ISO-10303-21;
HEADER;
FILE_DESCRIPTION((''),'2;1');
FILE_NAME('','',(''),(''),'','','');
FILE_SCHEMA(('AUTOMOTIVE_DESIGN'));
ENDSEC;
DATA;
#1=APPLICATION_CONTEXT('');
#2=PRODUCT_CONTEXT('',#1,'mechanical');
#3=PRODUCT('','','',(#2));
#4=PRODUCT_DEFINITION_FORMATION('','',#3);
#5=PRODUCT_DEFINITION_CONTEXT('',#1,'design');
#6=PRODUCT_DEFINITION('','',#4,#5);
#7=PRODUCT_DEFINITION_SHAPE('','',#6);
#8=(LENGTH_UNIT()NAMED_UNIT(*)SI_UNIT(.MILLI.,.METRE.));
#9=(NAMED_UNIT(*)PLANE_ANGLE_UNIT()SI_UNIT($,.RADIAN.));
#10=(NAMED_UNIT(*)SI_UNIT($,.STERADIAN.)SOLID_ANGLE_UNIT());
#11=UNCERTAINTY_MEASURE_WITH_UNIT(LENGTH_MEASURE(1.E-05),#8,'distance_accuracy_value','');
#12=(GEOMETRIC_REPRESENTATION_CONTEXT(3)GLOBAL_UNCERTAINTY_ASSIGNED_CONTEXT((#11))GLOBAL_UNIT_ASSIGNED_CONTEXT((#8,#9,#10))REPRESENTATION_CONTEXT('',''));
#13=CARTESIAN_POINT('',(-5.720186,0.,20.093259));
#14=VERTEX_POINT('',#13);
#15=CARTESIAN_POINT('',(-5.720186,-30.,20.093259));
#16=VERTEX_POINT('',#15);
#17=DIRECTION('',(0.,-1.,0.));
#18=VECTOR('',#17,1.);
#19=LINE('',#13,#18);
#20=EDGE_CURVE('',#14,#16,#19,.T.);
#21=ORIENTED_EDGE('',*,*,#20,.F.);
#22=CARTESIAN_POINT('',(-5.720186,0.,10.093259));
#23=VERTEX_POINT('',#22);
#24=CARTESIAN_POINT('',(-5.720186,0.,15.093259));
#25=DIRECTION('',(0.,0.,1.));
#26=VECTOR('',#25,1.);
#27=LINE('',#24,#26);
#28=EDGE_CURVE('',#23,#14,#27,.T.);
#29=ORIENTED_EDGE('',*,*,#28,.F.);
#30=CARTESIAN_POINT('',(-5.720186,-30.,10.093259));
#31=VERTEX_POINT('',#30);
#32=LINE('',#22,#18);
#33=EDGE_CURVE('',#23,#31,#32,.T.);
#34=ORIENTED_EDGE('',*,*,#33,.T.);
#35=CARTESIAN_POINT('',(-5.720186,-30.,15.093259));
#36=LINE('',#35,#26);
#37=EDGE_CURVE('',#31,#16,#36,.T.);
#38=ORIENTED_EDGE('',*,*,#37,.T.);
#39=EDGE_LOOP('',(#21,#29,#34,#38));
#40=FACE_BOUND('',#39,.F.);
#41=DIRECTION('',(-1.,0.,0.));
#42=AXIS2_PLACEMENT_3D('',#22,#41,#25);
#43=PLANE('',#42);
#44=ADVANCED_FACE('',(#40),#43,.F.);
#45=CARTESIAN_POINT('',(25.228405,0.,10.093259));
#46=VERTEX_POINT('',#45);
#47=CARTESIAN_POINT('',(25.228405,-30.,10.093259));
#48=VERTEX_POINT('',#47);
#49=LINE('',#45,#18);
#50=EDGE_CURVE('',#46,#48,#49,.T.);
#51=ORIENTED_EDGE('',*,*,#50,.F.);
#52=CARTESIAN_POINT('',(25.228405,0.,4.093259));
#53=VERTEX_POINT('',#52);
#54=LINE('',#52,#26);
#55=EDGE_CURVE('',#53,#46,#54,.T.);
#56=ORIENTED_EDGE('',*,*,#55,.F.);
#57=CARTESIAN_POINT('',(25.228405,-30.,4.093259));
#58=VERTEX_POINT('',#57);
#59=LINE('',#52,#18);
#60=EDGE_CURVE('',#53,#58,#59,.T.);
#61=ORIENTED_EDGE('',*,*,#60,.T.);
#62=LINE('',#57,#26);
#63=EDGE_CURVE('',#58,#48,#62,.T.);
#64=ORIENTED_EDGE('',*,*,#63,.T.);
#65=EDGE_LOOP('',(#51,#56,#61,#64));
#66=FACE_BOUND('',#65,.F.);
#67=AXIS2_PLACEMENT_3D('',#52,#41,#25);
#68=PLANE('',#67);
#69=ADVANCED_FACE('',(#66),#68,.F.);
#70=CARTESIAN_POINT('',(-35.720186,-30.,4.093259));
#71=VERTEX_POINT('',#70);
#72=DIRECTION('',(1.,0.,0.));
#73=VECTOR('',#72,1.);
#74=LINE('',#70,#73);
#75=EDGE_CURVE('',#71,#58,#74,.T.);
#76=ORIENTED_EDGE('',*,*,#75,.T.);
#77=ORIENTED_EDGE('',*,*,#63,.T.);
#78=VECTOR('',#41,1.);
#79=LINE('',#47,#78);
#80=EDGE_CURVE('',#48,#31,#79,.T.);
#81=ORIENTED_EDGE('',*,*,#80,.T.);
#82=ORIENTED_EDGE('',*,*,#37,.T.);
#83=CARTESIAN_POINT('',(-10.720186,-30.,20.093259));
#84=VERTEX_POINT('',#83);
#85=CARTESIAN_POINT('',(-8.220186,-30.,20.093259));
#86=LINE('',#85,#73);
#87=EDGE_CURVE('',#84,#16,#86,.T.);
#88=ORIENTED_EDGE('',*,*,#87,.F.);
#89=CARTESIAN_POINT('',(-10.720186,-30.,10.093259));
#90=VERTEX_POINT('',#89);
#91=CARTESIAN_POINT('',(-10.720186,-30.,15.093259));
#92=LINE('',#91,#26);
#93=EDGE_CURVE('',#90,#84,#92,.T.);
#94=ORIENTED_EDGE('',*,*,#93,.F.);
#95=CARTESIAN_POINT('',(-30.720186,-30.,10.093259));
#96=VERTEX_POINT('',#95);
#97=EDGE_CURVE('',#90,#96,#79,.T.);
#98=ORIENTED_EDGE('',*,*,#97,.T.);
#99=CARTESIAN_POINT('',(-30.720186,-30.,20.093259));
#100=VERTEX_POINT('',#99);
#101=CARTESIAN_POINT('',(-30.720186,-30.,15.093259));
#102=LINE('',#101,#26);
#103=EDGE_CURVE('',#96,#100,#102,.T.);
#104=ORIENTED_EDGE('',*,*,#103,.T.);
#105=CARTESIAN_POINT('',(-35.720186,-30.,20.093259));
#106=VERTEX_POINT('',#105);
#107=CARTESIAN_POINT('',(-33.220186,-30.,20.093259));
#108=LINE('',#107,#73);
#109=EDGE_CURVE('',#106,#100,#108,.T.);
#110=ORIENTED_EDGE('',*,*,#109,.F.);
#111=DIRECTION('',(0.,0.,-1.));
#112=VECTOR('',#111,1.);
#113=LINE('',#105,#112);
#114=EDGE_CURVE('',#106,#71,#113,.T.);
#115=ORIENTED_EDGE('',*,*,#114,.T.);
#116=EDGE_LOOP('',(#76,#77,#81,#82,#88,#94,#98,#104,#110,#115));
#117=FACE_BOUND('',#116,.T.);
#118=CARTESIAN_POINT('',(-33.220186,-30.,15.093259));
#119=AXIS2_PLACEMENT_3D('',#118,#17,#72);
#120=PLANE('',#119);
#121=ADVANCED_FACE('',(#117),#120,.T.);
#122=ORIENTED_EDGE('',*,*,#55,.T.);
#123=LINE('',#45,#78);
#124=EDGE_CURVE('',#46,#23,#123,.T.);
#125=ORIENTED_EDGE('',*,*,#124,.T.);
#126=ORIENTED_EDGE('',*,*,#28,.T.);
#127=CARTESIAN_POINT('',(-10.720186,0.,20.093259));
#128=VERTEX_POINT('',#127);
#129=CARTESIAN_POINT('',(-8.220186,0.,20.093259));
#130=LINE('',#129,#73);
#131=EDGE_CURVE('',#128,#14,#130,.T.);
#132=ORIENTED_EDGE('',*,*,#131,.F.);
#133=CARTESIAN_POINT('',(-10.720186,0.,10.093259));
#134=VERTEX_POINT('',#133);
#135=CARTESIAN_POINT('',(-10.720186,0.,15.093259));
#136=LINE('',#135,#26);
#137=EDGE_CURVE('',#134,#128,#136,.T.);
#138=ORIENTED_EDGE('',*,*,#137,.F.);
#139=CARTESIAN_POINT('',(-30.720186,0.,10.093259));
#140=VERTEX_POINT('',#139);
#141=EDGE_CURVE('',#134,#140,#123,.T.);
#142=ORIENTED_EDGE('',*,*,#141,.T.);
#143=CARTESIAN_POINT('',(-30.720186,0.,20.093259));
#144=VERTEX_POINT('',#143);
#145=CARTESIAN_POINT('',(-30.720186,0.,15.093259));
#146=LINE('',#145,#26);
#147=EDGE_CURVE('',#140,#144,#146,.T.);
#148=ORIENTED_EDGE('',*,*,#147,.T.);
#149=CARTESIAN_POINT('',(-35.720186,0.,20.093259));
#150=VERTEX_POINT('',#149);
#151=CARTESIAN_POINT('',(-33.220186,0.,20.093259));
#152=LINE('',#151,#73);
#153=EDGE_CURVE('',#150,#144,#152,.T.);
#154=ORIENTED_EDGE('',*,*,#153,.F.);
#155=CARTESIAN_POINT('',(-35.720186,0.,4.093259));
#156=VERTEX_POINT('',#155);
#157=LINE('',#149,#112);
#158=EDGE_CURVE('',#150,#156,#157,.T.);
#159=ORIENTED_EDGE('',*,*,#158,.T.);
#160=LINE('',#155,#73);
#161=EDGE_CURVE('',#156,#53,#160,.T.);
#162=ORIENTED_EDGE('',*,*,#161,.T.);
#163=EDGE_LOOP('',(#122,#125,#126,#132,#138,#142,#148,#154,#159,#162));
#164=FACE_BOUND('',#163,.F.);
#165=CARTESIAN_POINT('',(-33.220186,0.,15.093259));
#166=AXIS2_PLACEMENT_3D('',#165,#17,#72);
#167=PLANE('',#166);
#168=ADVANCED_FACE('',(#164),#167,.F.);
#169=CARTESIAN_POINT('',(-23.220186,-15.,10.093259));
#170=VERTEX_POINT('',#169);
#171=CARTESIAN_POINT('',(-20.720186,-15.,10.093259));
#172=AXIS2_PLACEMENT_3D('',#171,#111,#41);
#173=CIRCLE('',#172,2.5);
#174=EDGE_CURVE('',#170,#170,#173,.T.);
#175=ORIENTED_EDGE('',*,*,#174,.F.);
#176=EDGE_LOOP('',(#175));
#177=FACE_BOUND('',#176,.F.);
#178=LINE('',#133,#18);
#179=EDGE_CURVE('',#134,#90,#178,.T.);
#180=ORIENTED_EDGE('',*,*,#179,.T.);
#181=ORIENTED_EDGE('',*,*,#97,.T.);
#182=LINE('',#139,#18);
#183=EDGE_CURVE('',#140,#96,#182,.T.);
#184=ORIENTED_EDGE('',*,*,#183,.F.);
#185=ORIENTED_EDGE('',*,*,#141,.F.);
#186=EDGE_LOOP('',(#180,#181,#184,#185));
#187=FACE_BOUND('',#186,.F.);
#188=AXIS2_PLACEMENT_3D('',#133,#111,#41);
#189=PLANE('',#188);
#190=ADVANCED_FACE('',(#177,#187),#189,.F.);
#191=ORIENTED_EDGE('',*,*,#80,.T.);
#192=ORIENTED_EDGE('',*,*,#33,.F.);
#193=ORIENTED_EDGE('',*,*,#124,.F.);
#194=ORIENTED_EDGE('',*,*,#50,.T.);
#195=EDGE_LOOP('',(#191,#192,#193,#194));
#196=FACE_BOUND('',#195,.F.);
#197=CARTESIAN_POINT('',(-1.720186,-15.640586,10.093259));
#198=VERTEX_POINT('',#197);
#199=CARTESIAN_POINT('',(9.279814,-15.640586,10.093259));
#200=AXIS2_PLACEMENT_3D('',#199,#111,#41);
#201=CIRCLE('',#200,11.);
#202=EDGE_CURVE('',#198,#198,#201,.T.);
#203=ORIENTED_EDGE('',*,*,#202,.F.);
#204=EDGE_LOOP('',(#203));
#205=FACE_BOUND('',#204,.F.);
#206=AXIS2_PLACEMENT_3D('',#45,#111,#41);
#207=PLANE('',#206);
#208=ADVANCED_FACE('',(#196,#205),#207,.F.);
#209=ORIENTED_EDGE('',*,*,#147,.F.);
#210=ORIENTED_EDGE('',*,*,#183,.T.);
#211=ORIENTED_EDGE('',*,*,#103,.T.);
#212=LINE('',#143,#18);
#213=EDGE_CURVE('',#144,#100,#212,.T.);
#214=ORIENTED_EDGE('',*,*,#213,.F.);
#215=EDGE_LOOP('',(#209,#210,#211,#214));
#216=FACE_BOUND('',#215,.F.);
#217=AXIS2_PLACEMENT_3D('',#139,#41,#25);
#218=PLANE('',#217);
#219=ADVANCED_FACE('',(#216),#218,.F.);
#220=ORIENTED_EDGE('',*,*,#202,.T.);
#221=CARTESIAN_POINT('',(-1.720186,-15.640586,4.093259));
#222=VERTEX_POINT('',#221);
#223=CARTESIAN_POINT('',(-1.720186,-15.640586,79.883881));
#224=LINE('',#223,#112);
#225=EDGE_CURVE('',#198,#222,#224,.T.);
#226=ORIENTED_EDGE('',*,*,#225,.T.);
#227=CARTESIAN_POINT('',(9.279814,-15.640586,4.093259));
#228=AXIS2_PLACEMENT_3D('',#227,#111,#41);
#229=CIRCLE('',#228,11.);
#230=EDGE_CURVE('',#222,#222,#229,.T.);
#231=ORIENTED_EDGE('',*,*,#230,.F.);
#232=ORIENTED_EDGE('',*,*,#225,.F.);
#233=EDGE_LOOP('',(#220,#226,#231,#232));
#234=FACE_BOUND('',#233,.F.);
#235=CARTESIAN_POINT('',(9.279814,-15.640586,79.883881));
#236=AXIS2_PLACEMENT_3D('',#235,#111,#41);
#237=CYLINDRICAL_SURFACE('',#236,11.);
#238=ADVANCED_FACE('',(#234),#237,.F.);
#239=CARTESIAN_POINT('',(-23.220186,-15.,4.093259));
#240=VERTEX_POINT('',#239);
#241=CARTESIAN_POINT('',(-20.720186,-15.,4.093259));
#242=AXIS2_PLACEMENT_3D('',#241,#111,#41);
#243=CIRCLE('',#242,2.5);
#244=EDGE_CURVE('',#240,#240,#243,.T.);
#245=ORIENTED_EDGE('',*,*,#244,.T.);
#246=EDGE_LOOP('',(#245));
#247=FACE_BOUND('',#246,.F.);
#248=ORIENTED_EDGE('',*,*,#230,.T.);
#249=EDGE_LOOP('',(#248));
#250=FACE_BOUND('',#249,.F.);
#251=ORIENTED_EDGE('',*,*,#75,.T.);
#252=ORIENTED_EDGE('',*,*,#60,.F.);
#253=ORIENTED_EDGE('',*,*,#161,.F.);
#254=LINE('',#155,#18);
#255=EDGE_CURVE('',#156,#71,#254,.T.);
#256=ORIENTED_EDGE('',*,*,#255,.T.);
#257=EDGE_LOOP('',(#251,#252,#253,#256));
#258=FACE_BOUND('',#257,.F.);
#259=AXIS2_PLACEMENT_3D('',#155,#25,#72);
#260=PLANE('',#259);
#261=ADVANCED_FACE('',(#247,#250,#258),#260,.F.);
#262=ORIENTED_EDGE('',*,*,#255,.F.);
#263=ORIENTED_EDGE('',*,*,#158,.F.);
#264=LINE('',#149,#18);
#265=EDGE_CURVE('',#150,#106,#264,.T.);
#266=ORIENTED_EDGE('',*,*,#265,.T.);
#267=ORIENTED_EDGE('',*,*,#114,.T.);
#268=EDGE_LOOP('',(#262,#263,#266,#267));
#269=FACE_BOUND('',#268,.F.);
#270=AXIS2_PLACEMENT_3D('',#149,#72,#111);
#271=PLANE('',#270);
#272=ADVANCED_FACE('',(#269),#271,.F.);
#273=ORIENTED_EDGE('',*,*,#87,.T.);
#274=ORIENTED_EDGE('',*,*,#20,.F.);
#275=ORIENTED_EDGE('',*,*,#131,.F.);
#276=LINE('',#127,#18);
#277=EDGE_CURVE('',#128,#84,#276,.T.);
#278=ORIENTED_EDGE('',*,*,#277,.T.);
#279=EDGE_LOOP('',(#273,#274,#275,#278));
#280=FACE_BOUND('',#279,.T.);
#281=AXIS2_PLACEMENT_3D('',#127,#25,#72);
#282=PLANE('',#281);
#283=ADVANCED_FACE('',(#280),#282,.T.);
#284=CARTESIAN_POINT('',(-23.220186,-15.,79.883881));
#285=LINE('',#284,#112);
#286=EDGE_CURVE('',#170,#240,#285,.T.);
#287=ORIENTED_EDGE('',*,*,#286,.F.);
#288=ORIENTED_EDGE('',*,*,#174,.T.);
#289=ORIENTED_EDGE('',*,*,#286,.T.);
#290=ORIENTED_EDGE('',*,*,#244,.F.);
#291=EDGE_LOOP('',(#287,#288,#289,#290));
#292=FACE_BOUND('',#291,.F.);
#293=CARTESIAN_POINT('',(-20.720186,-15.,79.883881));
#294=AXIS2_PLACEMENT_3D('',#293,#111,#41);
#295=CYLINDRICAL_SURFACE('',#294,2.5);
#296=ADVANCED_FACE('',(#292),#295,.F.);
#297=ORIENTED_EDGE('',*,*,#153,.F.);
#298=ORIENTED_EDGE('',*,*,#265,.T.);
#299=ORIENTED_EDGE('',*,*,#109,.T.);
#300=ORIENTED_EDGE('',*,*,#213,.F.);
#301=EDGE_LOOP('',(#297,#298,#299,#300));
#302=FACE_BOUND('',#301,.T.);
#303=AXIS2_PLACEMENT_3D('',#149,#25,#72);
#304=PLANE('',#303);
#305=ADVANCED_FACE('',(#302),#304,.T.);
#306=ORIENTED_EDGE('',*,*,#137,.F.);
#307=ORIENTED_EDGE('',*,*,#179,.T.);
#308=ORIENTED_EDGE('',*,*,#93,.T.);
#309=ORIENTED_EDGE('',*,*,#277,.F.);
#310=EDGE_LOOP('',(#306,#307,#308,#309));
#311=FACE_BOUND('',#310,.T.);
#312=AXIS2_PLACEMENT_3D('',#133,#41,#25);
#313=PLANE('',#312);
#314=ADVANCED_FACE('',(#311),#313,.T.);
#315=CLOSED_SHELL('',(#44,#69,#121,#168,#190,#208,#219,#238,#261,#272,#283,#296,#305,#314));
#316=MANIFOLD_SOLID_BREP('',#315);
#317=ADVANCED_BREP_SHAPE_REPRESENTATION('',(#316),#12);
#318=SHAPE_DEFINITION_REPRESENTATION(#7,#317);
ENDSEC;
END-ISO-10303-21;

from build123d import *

# Parameters (mm, degrees)
F0_W     = 5
F0_H     = 10
F1_DEPTH = 30
F3_D     = 22
F5_D     = 5


# Not quite as in the source:
# - a feature names something its author has since deleted; it is built from what else it names


with BuildPart() as f1:
    # F0 (on Front) → F1 (new body)
    with BuildSketch(Plane.XZ):
        with Locations((-33.2201862009, 15.0932593657)):
            Rectangle(F0_W, F0_H)
        Polygon((-30.7201862009, 10.0932593657), (-35.7201862009, 10.0932593657), (-35.7201862009, 4.0932593657), (25.2284052642, 4.0932593657), (25.2284052642, 10.0932593657), (-5.7201862009, 10.0932593657), (-10.7201862009, 10.0932593657), align=None)
        with Locations((-8.2201862009, 15.0932593657)):
            Rectangle(F0_W, F0_H)
    extrude(amount=F1_DEPTH)

    # F3 (through all)
    with Locations(Plane.XY.offset(10.0932593657)):
        with Locations((9.2798137991, -15.640585908)):
            Hole(F3_D / 2)

    # F5 (through all)
    with Locations(Plane.XY.offset(10.0932593657)):
        with Locations((-20.7201862009, -15)):
            Hole(F5_D / 2)


solid = f1.part
